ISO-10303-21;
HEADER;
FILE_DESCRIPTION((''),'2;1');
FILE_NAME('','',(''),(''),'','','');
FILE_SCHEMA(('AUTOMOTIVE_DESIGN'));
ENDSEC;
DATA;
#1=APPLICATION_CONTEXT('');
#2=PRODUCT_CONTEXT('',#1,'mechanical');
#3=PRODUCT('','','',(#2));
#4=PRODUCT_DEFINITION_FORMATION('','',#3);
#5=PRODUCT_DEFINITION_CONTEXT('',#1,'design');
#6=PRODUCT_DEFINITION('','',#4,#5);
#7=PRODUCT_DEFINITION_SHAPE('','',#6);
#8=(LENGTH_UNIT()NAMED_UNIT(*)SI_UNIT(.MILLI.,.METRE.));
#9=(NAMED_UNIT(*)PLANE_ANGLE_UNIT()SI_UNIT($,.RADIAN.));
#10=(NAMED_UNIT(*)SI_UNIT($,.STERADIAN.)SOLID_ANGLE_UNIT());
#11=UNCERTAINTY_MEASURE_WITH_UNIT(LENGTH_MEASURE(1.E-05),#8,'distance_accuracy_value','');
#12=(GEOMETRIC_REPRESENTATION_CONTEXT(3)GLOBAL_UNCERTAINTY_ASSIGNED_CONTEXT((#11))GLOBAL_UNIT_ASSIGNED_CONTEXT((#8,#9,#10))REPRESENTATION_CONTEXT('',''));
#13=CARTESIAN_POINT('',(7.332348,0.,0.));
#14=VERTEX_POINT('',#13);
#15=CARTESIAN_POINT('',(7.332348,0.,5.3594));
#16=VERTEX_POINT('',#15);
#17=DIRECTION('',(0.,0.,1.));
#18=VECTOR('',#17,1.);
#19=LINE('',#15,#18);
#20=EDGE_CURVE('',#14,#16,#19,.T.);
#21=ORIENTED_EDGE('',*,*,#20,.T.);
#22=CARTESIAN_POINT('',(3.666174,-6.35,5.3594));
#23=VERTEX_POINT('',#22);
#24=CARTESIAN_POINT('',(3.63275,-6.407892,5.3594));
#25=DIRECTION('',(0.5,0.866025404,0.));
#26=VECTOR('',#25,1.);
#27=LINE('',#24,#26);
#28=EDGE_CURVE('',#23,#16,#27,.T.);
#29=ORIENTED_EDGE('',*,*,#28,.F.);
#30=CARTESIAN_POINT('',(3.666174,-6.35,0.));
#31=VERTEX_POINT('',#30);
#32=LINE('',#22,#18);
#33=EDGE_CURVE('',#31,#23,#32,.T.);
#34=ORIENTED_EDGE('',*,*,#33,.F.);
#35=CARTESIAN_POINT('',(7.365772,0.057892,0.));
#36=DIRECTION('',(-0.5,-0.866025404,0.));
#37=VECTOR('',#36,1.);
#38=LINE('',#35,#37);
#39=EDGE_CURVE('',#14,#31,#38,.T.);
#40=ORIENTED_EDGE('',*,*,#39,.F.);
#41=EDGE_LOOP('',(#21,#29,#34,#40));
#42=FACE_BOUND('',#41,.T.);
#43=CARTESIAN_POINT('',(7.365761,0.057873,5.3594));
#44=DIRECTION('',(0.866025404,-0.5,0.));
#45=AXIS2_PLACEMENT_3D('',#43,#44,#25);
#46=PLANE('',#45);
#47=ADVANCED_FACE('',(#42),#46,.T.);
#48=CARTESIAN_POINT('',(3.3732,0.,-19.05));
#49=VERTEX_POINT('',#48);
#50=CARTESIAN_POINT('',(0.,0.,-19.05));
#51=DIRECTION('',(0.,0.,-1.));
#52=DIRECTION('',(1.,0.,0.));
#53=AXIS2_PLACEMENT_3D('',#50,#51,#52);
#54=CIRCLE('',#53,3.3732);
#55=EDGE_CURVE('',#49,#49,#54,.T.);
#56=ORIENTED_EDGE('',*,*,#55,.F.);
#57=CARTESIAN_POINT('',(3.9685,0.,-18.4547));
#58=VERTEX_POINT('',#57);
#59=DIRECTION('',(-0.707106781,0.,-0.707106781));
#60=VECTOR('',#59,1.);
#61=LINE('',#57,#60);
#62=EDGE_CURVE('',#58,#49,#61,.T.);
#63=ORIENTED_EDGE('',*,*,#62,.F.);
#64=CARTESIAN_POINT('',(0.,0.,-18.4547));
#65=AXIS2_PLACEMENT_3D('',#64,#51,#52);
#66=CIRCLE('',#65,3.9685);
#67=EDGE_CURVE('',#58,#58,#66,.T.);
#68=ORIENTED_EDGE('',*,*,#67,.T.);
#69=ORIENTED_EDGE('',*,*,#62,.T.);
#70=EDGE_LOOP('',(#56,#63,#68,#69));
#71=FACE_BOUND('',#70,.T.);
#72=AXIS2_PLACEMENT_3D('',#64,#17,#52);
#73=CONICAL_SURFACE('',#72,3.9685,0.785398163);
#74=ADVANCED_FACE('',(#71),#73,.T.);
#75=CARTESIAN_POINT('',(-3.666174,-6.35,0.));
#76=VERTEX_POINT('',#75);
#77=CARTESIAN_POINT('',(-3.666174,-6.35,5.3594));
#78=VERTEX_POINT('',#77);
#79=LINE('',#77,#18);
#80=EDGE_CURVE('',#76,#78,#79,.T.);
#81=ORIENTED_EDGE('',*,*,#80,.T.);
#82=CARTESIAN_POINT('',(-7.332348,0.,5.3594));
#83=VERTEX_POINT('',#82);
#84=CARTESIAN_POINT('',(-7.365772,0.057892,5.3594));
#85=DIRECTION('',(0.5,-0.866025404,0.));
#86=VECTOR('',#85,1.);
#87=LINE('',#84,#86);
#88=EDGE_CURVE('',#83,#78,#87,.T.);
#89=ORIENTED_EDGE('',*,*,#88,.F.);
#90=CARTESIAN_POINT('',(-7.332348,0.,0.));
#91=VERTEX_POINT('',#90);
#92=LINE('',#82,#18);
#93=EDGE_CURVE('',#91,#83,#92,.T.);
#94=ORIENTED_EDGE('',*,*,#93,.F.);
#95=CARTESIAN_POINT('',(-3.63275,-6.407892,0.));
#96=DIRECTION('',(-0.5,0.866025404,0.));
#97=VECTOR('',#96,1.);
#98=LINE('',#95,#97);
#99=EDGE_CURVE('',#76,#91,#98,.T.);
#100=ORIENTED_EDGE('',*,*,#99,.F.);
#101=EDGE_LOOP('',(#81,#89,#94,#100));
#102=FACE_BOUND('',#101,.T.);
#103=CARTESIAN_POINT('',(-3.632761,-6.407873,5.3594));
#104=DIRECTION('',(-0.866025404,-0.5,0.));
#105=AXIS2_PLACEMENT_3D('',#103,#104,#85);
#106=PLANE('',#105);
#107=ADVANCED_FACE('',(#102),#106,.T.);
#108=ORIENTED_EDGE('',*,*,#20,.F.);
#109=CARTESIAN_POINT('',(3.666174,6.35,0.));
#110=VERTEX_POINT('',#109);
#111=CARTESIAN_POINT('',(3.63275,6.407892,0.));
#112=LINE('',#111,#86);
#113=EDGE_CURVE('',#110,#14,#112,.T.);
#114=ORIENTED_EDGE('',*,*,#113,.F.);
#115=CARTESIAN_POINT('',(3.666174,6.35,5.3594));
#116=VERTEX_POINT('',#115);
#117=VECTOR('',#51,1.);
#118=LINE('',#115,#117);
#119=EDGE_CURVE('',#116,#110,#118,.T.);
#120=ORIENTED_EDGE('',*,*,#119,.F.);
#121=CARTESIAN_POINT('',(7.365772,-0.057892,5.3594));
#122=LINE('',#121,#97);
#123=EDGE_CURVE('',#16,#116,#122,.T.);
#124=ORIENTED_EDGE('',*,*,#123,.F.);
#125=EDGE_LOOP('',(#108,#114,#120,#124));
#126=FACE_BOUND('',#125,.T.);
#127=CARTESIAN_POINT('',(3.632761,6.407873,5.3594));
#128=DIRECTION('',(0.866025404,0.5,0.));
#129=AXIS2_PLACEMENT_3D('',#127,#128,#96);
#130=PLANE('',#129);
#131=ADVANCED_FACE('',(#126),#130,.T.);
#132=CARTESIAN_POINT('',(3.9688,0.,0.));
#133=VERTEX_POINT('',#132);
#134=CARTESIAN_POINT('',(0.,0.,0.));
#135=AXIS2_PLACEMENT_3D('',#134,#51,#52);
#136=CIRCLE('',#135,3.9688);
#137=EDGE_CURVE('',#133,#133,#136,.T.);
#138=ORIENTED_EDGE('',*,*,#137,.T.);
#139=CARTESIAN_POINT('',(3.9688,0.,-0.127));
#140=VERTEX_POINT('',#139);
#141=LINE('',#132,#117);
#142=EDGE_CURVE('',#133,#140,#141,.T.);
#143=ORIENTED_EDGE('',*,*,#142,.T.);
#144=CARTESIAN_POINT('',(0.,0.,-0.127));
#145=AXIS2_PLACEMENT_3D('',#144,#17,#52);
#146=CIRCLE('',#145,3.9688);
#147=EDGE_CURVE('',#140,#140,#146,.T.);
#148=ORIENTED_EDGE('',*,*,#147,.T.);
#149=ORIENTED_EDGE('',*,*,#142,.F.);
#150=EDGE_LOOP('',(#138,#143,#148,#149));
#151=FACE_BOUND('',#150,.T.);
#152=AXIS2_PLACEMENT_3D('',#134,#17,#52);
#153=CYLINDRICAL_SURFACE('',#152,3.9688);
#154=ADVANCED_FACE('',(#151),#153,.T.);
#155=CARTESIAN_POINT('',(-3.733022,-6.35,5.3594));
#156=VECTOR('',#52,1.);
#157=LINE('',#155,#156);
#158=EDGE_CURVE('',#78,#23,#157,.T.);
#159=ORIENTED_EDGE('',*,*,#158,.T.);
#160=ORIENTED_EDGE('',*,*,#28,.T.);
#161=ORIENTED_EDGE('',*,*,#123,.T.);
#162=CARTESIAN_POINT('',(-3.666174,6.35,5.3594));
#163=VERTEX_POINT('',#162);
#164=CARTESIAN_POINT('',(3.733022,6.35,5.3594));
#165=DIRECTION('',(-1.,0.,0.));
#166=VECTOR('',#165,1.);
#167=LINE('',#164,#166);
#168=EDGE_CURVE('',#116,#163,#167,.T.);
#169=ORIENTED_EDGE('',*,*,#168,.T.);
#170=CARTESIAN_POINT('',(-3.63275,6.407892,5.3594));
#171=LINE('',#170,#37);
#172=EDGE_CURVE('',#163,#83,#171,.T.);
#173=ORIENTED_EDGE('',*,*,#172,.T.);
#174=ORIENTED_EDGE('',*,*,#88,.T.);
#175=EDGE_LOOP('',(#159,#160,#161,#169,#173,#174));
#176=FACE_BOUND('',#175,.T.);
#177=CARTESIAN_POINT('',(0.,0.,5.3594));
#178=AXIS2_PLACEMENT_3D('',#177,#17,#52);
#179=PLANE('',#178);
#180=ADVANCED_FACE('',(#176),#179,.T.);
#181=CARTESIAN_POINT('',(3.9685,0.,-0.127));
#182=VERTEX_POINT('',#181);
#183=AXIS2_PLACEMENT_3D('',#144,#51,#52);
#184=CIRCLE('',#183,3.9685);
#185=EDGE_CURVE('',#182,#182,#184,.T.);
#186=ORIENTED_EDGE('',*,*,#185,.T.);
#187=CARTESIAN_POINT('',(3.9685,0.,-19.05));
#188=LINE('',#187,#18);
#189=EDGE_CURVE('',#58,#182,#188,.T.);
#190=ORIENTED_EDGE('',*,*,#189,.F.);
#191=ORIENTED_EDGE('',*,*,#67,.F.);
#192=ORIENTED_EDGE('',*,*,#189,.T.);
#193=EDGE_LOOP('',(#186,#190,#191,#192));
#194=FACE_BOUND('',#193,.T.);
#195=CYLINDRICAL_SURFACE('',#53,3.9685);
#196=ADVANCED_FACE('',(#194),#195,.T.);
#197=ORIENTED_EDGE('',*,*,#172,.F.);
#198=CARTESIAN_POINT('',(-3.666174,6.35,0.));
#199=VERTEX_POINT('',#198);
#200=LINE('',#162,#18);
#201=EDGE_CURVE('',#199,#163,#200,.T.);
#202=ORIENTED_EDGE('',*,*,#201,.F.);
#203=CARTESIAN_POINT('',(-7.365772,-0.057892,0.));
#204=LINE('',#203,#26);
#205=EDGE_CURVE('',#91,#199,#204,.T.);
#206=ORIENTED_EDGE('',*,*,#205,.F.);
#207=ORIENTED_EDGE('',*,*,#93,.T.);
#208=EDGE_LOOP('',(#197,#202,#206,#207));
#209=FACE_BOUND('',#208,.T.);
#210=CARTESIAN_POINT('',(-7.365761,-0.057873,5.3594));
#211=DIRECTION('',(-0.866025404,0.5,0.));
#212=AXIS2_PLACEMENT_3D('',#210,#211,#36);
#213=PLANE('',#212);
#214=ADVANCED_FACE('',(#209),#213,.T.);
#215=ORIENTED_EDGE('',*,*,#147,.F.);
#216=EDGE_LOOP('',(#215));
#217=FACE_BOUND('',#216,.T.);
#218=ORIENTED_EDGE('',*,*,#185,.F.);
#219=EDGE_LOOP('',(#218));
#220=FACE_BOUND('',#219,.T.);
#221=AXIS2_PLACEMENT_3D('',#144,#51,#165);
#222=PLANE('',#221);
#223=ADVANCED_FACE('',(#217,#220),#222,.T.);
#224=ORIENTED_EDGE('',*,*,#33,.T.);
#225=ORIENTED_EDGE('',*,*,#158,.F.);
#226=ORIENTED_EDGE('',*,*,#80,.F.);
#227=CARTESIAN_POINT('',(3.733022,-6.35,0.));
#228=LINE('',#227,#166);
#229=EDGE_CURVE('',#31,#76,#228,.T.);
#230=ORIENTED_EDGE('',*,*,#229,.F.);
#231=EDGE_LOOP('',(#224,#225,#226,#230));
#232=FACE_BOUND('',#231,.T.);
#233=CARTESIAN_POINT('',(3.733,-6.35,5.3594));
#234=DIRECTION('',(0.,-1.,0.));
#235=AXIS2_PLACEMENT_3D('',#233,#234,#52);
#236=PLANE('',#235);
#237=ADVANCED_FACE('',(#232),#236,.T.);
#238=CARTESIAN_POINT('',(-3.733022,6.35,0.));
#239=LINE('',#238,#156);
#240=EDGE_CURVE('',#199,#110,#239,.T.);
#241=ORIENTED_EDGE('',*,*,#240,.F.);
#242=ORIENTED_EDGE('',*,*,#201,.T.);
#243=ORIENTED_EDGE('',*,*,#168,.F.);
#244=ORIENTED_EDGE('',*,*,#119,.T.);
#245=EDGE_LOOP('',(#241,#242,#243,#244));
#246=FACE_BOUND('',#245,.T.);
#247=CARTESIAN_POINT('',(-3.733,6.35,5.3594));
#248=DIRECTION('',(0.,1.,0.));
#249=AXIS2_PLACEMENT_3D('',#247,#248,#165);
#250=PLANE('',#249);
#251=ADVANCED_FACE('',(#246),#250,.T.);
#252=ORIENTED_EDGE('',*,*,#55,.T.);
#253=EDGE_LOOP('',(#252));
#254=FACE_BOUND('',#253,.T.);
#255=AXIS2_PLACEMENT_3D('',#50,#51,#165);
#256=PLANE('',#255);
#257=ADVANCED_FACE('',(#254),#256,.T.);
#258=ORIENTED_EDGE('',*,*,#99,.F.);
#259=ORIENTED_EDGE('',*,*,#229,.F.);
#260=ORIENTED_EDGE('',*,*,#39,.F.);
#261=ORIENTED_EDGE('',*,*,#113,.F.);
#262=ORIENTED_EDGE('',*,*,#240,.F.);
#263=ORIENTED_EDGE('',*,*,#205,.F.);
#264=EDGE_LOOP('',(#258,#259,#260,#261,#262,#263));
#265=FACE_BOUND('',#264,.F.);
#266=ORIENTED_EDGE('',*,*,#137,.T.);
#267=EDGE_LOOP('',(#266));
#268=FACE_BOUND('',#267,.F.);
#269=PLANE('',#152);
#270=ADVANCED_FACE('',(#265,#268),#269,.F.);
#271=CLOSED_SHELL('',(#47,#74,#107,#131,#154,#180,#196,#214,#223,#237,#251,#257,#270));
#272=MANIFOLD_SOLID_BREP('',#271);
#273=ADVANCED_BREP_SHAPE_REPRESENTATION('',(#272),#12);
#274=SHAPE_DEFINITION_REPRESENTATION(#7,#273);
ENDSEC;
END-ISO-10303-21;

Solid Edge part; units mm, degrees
sketch "Sketch1" plane through (0, 0, 0) normal (0, 0, 1) x (1, 0, 0)
  circle A0 centre (0, 0) radius 7.366
  dimension "D1" = 14.732
extrude "Protrusion1" add sketch "Sketch1" along normal blind 5.3594
sketch "Sketch2" plane through (0, 0, 0) normal (0, 0, -1) x (1, 0, 0)
  circle A0 centre (0, 0) radius 3.9688
extrude "Protrusion2" add sketch "Sketch2" along normal blind 19.05
sketch "Sketch3" plane through (0, 0, -19.05) normal (0, 0, -1) x (1, 0, 0)
  circle A0 centre (0, 0) radius 3.9685
extrude "Cutout1" cut sketch "Sketch3" against normal blind 18.923 flip side to cut
chamfer "Chamfer_1" distance 0.5953 angle 45 1 edges at (-3.9685, 0, -19.05)
sketch "Sketch4" plane through (0, 0, 5.3594) normal (0, 0, 1) x (1, 0, 0)
  line L0 (-3.733, 6.35) -> (3.733, 6.35)
  dimension "D1" = 12.7
extrude "Cutout2" cut sketch "Sketch4" against normal up to next material side at (0, 6.4, 5.3594)
pattern_circular "Pattern1" count 6 over 360 about axis through (0, 0, 5.3594) along (0, 0, 1) of "Cutout2"
properties part number "VTHE_0.313-18X0.750_SS"
